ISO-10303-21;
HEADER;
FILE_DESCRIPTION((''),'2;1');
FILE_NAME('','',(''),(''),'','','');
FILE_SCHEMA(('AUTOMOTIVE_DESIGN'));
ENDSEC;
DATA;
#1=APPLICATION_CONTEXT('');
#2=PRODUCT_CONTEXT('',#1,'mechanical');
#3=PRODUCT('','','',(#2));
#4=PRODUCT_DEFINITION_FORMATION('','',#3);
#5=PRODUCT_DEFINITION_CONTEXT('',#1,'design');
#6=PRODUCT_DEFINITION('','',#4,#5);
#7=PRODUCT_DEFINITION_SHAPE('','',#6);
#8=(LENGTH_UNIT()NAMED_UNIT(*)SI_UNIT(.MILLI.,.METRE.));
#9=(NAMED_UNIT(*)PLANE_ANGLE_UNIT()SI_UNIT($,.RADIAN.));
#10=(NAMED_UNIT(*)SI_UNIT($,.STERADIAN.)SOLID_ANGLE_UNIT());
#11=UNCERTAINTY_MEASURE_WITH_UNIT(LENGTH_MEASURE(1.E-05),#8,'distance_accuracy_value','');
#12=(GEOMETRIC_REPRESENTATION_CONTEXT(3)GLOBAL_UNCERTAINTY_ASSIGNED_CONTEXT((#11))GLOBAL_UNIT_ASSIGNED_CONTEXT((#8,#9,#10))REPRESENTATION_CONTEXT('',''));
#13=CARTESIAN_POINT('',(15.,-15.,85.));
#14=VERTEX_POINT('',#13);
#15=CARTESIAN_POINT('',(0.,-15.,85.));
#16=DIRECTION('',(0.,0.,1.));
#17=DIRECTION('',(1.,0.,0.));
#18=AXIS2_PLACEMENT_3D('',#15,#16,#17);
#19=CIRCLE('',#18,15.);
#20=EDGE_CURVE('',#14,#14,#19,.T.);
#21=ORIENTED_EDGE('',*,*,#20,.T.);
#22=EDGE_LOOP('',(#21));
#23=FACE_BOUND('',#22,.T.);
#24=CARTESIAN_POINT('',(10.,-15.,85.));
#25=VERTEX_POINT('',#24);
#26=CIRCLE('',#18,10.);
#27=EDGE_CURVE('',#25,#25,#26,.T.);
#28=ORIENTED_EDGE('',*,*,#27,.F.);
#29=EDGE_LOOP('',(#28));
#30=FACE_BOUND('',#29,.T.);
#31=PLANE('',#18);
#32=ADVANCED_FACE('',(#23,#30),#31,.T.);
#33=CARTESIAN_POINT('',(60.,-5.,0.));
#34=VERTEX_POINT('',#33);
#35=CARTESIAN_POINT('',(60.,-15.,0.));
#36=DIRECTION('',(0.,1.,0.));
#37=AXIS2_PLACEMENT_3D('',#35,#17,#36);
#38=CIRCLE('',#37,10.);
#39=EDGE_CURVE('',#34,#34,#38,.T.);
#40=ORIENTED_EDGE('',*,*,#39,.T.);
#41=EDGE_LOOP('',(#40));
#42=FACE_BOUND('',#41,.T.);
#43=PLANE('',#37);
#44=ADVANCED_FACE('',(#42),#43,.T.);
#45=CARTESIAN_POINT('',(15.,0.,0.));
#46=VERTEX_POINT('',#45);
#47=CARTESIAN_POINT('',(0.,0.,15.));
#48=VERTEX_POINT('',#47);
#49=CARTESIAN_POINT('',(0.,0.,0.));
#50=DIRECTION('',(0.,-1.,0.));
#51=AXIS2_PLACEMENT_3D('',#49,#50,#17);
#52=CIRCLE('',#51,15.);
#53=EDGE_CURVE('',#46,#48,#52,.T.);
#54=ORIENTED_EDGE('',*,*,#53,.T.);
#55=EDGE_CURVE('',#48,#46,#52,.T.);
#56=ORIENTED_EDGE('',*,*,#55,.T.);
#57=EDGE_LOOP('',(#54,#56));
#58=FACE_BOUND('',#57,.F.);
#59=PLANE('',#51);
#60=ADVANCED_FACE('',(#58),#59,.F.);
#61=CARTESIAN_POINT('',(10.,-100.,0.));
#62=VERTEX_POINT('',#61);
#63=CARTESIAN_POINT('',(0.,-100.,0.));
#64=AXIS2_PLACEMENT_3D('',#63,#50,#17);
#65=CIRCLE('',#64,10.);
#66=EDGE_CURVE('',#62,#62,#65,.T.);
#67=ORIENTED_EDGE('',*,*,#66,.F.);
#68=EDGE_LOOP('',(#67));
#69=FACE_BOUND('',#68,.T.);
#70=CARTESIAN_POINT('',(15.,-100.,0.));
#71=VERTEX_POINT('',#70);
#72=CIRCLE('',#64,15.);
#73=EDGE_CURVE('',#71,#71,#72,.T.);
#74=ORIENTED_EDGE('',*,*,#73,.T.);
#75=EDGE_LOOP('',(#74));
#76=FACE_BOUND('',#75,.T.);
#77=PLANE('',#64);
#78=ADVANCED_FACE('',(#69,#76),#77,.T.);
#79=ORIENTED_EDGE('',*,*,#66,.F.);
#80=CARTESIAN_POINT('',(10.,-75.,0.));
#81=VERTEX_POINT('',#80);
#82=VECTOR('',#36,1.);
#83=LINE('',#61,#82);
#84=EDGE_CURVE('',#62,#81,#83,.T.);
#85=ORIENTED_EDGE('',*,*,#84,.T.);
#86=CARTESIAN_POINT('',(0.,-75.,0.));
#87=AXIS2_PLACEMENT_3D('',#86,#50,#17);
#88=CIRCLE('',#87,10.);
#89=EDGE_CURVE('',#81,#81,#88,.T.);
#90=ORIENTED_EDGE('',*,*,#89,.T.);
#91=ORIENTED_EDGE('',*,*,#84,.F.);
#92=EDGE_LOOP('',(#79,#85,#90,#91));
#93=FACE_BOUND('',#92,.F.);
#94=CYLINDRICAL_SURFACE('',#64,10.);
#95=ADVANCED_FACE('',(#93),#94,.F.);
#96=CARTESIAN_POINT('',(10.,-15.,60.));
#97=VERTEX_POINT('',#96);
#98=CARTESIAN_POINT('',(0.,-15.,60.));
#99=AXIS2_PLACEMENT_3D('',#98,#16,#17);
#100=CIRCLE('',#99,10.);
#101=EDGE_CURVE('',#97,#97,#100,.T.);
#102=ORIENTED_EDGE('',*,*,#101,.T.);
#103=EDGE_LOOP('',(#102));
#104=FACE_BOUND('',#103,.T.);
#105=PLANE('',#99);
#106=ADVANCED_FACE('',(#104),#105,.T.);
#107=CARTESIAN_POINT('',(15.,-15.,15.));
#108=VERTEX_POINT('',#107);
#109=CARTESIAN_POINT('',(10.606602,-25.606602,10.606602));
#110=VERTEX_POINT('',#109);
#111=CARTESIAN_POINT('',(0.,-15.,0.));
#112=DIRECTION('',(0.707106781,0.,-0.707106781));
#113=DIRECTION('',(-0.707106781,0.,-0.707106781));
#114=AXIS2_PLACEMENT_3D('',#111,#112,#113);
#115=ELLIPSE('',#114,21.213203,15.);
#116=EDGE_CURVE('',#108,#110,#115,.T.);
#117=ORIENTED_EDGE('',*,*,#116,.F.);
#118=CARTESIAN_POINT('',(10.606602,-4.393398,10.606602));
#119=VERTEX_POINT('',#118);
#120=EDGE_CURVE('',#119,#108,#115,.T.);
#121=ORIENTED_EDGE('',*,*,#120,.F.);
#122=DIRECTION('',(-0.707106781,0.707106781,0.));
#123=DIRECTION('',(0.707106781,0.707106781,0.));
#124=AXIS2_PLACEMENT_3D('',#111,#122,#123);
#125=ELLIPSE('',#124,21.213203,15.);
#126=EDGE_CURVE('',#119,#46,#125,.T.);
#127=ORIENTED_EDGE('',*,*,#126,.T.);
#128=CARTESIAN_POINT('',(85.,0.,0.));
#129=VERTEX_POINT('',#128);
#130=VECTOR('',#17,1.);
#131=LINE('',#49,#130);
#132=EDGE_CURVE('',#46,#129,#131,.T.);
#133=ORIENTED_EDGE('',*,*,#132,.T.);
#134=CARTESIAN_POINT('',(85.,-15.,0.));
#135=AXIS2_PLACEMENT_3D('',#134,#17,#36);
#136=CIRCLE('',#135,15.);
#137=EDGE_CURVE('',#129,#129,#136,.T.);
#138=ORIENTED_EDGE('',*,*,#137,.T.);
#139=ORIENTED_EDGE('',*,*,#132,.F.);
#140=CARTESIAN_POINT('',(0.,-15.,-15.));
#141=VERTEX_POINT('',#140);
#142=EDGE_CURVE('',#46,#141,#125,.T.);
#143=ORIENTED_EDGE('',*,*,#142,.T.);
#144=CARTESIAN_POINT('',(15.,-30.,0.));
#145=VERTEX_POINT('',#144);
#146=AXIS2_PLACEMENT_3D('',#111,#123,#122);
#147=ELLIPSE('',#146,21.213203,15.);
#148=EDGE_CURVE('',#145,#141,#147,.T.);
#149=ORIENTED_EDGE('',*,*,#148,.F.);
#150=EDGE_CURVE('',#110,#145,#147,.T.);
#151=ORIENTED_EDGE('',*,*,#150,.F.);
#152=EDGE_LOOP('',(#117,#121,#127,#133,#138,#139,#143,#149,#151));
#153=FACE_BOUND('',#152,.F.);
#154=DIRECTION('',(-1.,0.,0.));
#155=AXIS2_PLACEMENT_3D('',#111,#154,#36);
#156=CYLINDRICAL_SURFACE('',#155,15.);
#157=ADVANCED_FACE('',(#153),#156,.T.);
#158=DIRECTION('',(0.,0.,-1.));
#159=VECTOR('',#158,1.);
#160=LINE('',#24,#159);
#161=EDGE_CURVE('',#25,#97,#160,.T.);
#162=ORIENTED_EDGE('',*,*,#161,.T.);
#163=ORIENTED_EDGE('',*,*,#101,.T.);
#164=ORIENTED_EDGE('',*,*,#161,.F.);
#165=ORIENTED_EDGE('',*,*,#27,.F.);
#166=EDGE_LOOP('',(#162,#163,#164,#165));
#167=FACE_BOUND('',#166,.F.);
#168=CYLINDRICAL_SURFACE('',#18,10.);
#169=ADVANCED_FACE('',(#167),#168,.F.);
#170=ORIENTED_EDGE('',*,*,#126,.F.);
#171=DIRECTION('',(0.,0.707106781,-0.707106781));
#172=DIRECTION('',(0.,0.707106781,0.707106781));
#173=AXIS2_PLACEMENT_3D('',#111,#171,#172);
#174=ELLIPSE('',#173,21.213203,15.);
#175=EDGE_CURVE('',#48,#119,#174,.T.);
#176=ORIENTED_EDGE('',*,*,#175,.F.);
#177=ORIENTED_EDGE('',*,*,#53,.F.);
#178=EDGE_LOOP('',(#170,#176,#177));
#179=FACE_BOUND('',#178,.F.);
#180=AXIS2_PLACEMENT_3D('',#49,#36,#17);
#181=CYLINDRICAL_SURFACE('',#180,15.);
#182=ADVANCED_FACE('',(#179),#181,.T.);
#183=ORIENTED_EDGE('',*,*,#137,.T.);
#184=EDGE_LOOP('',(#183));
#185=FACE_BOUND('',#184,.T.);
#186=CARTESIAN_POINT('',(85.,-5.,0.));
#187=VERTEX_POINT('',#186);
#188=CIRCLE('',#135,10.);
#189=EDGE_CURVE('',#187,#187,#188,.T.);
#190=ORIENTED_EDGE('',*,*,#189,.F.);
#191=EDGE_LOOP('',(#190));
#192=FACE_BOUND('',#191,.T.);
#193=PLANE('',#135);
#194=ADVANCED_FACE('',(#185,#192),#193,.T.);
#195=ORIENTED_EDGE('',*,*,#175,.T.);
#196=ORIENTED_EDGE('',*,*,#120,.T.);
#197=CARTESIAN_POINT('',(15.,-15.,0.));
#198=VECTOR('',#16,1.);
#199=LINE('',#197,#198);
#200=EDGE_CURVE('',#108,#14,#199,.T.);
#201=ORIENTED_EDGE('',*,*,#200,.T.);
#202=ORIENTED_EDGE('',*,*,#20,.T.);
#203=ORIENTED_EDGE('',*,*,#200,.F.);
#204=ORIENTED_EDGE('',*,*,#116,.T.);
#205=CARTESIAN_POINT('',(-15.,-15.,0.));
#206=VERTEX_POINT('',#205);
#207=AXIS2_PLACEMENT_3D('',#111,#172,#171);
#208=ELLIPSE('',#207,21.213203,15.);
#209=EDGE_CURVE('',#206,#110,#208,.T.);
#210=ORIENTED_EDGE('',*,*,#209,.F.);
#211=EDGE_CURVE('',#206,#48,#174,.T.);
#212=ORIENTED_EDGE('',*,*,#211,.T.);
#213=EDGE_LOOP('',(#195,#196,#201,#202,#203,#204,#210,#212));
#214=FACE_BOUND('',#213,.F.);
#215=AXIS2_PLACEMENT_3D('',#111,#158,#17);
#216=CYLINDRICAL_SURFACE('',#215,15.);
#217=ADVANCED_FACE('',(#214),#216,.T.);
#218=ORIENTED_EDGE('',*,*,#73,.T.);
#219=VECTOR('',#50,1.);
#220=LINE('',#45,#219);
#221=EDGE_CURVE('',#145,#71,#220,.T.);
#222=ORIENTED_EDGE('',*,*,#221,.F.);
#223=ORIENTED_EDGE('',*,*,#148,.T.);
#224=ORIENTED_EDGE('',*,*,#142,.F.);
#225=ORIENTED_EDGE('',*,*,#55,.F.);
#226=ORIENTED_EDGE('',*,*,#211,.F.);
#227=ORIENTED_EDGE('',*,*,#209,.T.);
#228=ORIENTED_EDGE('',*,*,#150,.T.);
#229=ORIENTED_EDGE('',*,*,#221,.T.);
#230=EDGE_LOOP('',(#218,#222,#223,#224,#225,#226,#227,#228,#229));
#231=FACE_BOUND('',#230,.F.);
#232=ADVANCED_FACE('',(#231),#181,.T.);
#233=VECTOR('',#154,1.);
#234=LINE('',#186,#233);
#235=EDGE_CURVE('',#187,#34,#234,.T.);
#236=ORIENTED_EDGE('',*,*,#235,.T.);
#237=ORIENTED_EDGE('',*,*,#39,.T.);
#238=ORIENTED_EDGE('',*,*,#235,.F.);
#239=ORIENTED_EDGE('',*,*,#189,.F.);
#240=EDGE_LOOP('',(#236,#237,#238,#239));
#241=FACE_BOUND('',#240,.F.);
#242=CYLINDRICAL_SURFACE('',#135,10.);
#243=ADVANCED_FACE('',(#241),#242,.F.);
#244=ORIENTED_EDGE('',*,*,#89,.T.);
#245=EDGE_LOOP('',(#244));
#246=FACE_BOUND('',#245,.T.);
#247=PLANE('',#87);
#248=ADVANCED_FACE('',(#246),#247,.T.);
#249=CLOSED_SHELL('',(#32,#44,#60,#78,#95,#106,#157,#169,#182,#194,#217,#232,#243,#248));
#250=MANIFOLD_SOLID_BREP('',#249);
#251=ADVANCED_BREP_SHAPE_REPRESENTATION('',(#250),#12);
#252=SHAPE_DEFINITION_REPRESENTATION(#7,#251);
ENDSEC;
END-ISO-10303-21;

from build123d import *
from build123d import SkipClean  # not in build123d's __all__

# Parameters (mm, degrees)
F2_R      = 15
F3_DEPTH  = 100
F4_R      = 10
F5_DEPTH  = 25
F6_R      = 15
F7_DEPTH  = 85
F8_R      = 10
F9_DEPTH  = 25
F10_R     = 15
F11_DEPTH = 85
F12_R     = 10
F13_DEPTH = 25


with BuildPart() as f3:
    # F2 (on Front) → F3 (new body)
    with BuildSketch(Plane.XZ):
        Circle(F2_R)
    extrude(amount=F3_DEPTH)

    # F4 (on face) → F5 (cut)
    with BuildSketch(Plane.XZ.offset(100)):
        Circle(F4_R)
    extrude(amount=-F5_DEPTH, mode=Mode.SUBTRACT)

    # F6 (on Top) → F7 (join)
    with BuildSketch(Plane.XY):
        with Locations((0, -15)):
            Circle(F6_R)
    with SkipClean():  # cleaning this boolean's faces spoils the solid; the shape is the same uncleaned
        extrude(amount=F7_DEPTH)

    # F8 (on face) → F9 (cut)
    with BuildSketch(Plane.XY.offset(85)):
        with Locations((0, -15)):
            Circle(F8_R)
    with SkipClean():  # cleaning this boolean's faces spoils the solid; the shape is the same uncleaned
        extrude(amount=-F9_DEPTH, mode=Mode.SUBTRACT)

    # F10 (on Right) → F11 (join)
    with BuildSketch(Plane.YZ):
        with Locations((-15, 0)):
            Circle(F10_R)
    extrude(amount=F11_DEPTH)

    # F12 (on face) → F13 (cut)
    with BuildSketch(Plane.YZ.offset(85)):
        with Locations((-15, 0)):
            Circle(F12_R)
    extrude(amount=-F13_DEPTH, mode=Mode.SUBTRACT)


solid = f3.part
